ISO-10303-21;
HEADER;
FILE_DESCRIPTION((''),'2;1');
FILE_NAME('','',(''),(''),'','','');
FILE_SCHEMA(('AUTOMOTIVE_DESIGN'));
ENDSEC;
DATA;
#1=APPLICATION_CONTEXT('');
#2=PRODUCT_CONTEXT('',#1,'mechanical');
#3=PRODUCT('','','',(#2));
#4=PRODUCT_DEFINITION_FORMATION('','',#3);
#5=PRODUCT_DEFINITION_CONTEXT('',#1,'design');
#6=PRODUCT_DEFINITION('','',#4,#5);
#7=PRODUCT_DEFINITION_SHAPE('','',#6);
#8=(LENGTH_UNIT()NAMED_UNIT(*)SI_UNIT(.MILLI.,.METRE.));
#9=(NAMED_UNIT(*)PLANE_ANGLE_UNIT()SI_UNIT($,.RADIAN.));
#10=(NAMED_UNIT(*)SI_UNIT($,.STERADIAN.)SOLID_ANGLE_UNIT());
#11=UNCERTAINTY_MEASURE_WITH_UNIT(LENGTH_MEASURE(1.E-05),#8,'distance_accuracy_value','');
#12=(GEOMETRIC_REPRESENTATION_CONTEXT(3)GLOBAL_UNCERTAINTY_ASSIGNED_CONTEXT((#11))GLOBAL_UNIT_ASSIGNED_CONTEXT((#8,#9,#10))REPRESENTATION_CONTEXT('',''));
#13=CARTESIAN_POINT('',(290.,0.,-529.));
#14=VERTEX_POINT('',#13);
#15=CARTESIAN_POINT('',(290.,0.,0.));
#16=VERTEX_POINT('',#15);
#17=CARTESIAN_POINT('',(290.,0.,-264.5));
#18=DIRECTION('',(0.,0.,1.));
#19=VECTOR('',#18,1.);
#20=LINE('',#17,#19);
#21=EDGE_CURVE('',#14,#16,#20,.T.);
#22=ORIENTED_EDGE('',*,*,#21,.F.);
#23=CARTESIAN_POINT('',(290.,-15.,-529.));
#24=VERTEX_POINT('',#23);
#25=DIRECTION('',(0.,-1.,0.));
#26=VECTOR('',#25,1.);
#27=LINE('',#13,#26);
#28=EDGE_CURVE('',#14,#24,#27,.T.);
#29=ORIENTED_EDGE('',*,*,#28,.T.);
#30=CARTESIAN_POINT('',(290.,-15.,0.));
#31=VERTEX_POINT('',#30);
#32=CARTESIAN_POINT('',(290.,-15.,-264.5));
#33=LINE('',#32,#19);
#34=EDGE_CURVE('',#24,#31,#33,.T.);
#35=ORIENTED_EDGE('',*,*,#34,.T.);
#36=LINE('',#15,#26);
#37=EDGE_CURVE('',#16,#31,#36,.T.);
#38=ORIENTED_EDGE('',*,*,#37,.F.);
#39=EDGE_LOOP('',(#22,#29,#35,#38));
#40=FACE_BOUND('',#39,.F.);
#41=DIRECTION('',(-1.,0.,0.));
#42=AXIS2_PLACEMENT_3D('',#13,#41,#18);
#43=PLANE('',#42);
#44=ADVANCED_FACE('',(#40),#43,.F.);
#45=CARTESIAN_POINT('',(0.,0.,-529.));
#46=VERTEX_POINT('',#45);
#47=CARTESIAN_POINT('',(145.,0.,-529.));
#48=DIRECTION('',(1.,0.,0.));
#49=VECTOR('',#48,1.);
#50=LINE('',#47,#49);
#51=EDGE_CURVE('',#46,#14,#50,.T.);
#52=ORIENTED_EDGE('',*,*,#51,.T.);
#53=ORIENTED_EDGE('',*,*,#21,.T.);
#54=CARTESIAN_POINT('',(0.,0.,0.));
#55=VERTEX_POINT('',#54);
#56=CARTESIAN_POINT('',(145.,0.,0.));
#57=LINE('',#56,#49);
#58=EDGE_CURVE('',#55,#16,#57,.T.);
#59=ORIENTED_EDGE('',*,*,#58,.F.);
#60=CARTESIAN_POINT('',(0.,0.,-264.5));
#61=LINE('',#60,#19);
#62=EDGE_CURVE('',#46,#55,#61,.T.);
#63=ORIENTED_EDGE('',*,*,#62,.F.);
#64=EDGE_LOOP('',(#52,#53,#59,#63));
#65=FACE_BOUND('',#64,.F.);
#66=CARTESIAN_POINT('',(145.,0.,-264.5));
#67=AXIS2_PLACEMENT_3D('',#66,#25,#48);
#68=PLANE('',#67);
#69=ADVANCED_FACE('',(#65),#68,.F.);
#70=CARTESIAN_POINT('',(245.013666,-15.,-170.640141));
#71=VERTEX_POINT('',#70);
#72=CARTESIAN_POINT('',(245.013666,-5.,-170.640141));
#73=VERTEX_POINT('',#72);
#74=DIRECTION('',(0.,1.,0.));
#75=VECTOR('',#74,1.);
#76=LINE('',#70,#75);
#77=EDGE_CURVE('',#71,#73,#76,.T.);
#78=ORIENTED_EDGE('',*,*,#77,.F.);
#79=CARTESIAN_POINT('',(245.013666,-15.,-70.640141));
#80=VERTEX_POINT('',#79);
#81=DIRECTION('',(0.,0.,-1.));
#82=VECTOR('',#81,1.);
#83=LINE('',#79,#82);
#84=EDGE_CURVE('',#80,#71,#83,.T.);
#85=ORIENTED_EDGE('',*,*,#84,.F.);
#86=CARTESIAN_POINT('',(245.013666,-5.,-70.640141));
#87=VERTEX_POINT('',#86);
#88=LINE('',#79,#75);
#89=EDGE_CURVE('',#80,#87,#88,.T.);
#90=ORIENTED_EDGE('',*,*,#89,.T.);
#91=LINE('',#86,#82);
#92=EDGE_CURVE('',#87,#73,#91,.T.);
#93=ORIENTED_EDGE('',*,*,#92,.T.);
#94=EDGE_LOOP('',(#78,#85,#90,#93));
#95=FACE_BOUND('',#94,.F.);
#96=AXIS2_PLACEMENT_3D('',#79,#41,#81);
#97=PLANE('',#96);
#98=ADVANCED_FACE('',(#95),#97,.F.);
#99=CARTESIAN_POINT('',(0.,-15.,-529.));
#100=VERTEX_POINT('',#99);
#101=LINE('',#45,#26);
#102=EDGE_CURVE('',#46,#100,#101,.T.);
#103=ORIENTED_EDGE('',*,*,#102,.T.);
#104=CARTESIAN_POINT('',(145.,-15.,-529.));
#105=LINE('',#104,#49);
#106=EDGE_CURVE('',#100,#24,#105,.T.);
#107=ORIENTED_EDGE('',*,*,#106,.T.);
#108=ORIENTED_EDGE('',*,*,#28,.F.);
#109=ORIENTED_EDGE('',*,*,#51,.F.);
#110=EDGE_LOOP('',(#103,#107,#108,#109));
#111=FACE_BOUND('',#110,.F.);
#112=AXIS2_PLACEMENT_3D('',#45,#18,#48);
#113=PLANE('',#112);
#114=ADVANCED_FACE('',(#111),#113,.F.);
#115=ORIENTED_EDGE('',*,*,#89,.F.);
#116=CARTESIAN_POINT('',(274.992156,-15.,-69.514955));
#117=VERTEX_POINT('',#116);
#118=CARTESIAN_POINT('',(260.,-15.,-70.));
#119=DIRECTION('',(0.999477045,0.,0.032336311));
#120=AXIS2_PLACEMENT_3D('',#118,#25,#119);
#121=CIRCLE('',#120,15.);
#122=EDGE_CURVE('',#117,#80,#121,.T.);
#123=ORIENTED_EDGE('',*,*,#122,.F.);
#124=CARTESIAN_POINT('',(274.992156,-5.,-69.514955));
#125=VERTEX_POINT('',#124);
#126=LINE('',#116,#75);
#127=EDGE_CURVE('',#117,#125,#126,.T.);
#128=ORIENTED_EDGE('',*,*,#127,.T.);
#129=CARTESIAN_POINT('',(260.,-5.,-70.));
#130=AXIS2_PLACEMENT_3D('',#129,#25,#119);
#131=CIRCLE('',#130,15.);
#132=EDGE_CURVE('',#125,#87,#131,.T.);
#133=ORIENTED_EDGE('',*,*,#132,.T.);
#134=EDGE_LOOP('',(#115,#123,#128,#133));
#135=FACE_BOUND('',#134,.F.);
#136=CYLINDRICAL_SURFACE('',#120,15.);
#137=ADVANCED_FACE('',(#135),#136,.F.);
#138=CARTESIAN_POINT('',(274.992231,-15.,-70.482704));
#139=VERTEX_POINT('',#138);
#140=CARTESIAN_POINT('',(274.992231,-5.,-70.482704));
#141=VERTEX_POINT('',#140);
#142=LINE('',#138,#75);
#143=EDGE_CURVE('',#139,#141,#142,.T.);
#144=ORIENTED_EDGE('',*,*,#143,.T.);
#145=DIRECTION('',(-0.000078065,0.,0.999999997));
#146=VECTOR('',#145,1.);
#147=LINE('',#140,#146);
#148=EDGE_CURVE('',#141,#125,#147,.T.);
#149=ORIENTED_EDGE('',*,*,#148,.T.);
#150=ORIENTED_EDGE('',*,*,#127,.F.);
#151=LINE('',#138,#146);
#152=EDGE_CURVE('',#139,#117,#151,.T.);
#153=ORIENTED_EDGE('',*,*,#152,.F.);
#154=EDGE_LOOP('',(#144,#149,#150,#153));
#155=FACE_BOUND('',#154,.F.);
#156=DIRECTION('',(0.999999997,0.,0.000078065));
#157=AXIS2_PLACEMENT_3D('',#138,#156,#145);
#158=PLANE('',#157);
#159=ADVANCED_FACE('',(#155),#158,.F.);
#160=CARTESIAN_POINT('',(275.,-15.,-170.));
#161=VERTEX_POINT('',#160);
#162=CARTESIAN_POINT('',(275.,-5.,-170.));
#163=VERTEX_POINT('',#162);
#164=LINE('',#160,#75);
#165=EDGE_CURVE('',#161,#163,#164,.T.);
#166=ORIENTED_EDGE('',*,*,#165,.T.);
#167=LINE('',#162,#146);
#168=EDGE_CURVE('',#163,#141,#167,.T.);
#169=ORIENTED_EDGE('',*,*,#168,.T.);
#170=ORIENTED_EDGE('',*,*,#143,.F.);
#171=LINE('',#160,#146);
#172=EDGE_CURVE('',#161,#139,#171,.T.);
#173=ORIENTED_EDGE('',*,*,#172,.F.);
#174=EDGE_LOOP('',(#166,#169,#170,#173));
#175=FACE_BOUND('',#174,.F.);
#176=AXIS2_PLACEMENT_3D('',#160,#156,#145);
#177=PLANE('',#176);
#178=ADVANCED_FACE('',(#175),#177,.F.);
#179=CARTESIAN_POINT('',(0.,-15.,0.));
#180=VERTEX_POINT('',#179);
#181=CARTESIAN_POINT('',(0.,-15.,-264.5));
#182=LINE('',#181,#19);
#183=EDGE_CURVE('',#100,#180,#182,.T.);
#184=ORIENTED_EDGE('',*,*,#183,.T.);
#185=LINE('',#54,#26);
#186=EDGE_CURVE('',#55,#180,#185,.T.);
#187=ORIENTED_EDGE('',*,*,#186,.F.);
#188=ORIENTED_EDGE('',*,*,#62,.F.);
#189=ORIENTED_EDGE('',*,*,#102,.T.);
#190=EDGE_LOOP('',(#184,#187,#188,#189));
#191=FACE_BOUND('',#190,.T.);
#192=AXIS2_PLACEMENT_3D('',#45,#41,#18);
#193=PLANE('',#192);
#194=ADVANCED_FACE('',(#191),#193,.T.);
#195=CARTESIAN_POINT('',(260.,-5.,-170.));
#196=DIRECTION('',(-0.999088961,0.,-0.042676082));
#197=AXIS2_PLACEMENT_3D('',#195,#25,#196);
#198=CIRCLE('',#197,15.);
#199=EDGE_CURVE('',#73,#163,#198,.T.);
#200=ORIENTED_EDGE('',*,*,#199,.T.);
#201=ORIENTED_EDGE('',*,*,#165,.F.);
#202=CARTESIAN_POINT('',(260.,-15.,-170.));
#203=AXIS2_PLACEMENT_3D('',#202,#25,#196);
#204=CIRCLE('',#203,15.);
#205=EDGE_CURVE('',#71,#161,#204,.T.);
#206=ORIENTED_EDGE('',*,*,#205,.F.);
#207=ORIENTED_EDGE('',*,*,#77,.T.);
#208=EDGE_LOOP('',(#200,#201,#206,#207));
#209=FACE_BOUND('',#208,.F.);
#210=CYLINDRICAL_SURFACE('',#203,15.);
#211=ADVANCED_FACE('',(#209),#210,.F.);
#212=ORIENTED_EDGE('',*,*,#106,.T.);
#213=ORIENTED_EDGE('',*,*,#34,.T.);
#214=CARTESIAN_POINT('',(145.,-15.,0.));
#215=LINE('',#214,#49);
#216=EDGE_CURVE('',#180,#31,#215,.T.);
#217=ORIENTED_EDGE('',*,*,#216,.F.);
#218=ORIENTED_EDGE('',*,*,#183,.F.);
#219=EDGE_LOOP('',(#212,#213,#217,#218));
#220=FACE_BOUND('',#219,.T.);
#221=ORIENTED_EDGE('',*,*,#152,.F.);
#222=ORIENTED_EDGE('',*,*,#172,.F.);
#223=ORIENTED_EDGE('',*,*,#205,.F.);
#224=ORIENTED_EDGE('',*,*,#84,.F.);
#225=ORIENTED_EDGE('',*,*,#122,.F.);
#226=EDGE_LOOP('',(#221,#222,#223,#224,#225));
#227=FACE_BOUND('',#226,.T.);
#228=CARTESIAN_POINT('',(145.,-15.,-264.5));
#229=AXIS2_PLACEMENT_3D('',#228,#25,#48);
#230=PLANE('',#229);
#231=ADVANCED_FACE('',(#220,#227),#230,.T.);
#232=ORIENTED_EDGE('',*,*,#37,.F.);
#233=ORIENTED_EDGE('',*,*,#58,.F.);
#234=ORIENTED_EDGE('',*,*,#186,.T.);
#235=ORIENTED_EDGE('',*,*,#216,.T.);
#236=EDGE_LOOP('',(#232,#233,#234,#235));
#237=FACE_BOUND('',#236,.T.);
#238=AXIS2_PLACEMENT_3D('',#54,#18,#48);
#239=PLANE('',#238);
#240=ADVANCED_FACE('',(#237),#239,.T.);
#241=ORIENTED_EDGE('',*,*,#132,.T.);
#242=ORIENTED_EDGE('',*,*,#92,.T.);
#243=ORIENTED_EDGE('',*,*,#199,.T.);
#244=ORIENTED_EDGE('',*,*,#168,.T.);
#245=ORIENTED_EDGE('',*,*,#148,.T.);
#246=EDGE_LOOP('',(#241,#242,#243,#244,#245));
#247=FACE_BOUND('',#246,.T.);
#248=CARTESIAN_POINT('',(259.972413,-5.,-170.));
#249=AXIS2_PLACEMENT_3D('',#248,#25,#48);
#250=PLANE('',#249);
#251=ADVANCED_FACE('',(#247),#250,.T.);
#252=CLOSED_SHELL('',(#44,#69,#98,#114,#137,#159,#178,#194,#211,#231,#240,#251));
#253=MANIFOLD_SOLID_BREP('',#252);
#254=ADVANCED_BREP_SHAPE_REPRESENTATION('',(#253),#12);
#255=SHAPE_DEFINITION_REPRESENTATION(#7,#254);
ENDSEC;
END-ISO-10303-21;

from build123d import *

# Parameters (mm, degrees)
F0_W     = 290
F0_H     = 529
F1_DEPTH = 15
F3_DEPTH = 10


with BuildPart() as f1:
    # F0 (on Front) → F1 (new body)
    with BuildSketch(Plane.XZ):
        with Locations((145, -264.5)):
            Rectangle(F0_W, F0_H)
    extrude(amount=F1_DEPTH)

    # F2 (on face) → F3 (cut)
    with BuildSketch(Plane.XZ.offset(15)):
        with BuildLine():
            Line((245.0136655844, -169.3598587771), (245.0136655844, -170.6401412229))
            ThreePointArc((245.0136655844, -170.6401412229), (260.3201435355, -184.9965832147), (275, -170))
            ThreePointArc((275, -170), (260.3201435355, -155.0034167853), (245.0136655844, -169.3598587771))
        make_face()
        with BuildLine():
            ThreePointArc((245.0136655844, -169.3598587771), (260.3201435355, -155.0034167853), (275, -170))
            Line((275.0000000457, -170), (274.9922312187, -70.4827039319))
            ThreePointArc((274.9922312187, -70.4827039319), (260.0787738422, -84.9997931546), (245.0136655844, -70.6401412229))
            Line((245.0136655844, -70.6401412229), (245.0136655844, -169.3598587771))
        make_face()
        with BuildLine():
            ThreePointArc((245.0136655844, -70.6401412229), (260.0787738422, -84.9997931546), (274.9922312187, -70.4827039319))
            Line((274.9922312187, -70.4827039319), (274.9921556713, -69.5149553341))
            ThreePointArc((274.9921556713, -69.5149553341), (259.4373995265, -55.0105543562), (245.0136655844, -70.6401412229))
        make_face()
    extrude(amount=-F3_DEPTH, mode=Mode.SUBTRACT)


solid = f1.part
